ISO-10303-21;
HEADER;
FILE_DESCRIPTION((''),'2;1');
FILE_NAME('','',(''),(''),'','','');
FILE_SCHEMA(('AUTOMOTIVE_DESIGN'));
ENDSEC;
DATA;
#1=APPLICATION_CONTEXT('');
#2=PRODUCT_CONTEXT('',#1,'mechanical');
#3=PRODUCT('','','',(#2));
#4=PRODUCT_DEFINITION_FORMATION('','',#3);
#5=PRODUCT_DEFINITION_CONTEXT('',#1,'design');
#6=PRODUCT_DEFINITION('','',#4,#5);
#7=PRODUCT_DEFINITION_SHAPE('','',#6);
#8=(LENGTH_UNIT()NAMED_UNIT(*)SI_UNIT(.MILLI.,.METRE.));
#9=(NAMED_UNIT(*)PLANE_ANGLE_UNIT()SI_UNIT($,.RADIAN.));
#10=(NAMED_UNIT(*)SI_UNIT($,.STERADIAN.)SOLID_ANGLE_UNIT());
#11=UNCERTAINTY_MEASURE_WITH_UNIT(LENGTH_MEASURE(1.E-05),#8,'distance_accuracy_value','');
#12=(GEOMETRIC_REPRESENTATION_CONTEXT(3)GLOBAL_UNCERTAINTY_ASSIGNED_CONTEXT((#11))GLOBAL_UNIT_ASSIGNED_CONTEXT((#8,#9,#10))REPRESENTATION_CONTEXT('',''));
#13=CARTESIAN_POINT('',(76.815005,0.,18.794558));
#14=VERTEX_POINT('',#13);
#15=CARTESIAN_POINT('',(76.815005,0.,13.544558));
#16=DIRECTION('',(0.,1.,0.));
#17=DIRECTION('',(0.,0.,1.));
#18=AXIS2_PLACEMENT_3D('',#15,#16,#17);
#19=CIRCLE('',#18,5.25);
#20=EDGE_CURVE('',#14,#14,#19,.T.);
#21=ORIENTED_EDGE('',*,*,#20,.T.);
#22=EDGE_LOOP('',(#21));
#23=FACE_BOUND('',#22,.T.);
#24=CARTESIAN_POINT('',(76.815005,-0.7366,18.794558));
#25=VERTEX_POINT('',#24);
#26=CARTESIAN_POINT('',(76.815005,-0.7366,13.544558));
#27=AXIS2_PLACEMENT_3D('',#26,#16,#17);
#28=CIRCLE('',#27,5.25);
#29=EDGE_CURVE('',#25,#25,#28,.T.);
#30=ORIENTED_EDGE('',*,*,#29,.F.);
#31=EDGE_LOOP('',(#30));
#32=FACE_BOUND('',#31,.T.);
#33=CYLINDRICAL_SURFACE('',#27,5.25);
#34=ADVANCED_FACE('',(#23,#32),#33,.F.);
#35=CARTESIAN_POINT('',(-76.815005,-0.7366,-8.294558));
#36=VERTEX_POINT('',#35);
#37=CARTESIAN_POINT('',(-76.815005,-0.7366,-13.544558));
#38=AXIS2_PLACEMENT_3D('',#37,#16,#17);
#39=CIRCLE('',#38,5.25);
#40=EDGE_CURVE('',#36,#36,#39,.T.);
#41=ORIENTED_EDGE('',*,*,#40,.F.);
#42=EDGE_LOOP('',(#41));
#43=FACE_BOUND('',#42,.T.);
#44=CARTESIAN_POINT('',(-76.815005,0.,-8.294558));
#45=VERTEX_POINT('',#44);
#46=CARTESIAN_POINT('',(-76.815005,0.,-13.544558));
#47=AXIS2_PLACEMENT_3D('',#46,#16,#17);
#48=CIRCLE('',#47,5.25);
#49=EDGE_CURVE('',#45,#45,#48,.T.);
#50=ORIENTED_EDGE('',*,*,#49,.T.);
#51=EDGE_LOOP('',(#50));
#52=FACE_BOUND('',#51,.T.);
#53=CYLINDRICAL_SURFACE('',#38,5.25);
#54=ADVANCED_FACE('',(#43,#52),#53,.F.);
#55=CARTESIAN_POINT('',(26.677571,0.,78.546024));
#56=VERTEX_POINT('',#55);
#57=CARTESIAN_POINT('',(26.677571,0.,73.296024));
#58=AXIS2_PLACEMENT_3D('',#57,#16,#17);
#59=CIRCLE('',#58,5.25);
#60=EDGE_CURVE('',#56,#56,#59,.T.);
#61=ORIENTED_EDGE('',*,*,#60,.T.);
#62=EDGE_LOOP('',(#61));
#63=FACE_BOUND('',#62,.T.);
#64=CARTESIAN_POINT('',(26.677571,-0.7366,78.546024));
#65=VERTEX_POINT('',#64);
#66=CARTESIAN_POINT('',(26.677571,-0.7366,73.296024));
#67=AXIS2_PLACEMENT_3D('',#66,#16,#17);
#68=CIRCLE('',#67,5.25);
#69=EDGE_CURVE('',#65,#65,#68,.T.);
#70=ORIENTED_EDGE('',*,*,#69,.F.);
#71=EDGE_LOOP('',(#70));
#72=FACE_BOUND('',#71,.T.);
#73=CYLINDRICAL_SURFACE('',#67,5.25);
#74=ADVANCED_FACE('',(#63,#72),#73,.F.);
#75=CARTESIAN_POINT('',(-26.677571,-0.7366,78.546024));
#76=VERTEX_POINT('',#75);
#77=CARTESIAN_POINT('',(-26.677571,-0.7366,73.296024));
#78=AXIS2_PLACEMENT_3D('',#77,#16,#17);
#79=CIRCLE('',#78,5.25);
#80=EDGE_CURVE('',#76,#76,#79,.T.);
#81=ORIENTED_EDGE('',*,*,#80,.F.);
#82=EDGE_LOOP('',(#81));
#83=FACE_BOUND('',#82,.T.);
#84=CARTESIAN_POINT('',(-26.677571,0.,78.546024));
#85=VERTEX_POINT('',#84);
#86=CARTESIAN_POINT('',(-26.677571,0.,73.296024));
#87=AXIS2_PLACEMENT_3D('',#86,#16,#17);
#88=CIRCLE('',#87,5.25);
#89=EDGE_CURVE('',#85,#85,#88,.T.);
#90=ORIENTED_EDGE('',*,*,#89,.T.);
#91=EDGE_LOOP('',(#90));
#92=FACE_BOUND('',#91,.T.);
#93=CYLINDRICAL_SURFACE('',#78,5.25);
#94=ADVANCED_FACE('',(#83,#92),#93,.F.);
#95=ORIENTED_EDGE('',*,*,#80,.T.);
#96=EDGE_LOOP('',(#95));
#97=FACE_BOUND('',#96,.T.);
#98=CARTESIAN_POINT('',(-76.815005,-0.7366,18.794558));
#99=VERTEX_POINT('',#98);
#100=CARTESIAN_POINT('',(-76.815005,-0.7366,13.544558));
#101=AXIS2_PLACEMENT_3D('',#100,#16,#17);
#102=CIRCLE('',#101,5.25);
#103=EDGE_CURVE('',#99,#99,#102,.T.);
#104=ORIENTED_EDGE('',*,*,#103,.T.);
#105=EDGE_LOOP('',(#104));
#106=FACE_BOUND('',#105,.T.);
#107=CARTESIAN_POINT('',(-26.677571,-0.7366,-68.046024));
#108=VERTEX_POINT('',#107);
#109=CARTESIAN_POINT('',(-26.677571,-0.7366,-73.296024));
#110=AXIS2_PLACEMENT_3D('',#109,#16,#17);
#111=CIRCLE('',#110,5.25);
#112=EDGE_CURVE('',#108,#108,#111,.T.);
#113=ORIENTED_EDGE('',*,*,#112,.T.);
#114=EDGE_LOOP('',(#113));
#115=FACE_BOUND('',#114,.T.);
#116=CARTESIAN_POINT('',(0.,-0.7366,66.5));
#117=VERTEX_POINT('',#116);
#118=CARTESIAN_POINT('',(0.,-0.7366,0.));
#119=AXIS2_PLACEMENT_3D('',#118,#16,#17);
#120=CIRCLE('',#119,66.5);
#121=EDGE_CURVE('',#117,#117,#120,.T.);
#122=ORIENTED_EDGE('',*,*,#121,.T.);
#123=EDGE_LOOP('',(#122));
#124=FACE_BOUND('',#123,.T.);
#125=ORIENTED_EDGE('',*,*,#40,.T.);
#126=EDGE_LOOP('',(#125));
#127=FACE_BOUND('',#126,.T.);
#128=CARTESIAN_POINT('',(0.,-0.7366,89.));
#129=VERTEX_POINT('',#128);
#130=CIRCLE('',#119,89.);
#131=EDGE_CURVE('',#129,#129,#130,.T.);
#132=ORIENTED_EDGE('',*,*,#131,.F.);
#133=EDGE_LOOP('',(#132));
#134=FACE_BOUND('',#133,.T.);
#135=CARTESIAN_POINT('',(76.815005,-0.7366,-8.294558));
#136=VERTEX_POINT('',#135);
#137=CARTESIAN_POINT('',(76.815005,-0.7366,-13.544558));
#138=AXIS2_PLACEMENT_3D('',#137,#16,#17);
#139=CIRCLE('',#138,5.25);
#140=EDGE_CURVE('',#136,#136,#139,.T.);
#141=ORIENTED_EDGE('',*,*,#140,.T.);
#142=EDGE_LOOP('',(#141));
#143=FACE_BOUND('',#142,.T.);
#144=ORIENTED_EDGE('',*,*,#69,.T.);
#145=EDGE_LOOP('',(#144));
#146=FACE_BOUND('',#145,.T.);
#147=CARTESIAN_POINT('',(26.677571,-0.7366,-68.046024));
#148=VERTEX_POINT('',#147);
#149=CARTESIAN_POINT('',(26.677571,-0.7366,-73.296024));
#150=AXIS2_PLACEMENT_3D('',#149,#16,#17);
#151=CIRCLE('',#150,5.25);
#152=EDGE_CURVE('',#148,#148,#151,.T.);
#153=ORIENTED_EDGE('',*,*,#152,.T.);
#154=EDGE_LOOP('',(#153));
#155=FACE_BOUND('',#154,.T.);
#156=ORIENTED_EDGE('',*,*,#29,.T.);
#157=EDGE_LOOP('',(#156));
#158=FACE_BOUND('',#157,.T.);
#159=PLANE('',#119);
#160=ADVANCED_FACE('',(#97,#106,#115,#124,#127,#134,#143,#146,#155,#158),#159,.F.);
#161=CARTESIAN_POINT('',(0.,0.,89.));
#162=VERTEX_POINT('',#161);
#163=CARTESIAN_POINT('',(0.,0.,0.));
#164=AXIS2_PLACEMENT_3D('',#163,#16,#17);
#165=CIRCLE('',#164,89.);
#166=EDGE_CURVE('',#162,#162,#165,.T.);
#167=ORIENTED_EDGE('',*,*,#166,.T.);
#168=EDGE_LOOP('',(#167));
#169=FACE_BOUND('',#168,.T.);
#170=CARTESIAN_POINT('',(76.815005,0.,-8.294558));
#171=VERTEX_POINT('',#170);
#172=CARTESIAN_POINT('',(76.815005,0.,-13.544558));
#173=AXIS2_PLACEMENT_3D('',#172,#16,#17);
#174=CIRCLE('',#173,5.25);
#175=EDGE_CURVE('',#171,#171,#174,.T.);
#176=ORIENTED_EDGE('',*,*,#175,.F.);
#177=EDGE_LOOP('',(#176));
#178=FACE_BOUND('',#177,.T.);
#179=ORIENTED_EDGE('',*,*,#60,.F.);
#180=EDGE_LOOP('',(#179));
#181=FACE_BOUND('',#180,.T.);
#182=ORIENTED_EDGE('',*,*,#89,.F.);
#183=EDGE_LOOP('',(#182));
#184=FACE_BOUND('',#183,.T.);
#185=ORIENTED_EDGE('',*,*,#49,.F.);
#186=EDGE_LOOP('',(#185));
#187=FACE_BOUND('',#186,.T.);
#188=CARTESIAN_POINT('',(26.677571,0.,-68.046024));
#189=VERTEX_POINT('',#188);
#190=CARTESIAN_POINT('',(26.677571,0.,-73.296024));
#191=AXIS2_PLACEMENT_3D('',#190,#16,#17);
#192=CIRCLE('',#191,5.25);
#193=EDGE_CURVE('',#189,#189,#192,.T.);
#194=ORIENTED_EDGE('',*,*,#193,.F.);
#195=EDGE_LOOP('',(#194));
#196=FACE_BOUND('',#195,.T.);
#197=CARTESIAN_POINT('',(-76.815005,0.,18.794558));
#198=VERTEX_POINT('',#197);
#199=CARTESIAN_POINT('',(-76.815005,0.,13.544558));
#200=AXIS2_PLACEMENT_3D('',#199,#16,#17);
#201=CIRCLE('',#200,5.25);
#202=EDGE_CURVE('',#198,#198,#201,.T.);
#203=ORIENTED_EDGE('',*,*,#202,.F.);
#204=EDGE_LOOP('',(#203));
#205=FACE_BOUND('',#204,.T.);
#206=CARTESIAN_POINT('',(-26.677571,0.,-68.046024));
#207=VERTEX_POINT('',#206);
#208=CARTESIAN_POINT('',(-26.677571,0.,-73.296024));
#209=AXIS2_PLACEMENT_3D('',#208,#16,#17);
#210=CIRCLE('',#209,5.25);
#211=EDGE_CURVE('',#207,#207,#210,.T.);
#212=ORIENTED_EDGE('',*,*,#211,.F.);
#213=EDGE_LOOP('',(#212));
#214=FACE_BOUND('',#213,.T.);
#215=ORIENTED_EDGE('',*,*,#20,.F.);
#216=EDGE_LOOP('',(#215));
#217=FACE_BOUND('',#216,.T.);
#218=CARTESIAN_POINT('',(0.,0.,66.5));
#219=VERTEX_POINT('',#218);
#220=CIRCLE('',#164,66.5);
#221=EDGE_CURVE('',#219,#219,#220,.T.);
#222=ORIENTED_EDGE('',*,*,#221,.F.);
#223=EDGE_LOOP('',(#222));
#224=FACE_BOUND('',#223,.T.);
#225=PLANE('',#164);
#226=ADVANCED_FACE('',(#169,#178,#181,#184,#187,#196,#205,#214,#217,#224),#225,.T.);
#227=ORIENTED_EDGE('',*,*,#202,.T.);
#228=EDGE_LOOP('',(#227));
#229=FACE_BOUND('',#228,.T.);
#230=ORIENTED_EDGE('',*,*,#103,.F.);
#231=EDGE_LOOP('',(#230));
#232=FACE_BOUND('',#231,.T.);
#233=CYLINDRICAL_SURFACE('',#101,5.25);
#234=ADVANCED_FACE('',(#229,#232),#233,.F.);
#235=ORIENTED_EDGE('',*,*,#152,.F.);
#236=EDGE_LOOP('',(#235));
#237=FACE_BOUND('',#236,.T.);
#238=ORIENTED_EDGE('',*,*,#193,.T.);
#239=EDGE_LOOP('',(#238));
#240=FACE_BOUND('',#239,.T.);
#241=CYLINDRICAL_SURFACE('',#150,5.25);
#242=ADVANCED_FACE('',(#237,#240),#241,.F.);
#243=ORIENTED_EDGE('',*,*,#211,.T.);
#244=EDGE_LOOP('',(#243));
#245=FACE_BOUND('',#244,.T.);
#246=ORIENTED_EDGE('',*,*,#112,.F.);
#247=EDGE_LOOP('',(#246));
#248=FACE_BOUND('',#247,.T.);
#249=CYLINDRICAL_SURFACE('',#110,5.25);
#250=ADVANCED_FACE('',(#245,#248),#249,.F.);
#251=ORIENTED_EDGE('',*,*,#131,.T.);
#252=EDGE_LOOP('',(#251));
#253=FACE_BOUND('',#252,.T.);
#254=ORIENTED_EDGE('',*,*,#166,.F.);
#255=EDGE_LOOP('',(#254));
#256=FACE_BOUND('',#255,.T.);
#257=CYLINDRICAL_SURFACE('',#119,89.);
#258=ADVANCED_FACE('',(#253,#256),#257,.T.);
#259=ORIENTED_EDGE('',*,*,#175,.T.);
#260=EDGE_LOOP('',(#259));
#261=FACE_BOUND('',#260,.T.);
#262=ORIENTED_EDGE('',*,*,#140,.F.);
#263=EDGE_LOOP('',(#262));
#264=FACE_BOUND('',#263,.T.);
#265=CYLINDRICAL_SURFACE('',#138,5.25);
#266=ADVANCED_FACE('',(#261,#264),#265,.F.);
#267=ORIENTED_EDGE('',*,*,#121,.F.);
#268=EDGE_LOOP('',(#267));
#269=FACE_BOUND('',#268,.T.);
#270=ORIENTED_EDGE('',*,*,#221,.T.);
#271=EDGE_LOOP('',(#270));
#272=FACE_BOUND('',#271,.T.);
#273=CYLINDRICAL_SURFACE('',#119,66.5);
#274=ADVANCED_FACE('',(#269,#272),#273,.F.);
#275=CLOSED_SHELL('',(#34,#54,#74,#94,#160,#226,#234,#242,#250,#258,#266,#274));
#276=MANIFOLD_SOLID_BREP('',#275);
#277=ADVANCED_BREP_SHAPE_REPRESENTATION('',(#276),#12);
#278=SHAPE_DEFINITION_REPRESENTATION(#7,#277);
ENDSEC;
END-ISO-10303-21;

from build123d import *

# Parameters (mm, degrees)
SKETCH1_R          = 89
SKETCH1_R_2        = 66.5
SKETCH1_R_3        = 5.25
BASE_FLANGE1_DEPTH = 0.7366


# Sheet-metal steps are written as plain solids
with BuildPart() as part:
    # Sketch1 → Base-Flange1 (new body)
    with BuildSketch(Plane(origin=(0, 0, 0), x_dir=(1, 0, 0), z_dir=(0, 1, 0))):
        with Locations(Location((0, 0, 0), (0, 0, 270))):
            Circle(SKETCH1_R)
        with Locations(Location((0, 0, 0), (0, 0, 270))):
            Circle(SKETCH1_R_2, mode=Mode.SUBTRACT)
        with Locations(Location((26.677571179, 73.296024421, 0), (0, 0, 270))):
            Circle(SKETCH1_R_3, mode=Mode.SUBTRACT)
        with Locations(Location((-26.677571179, 73.296024421, 0), (0, 0, 270))):
            Circle(SKETCH1_R_3, mode=Mode.SUBTRACT)
        with Locations(Location((-76.815004735, 13.544557858, 0), (0, 0, 270))):
            Circle(SKETCH1_R_3, mode=Mode.SUBTRACT)
        with Locations(Location((-76.815004735, -13.544557858, 0), (0, 0, 270))):
            Circle(SKETCH1_R_3, mode=Mode.SUBTRACT)
        with Locations(Location((-26.677571179, -73.296024421, 0), (0, 0, 270))):
            Circle(SKETCH1_R_3, mode=Mode.SUBTRACT)
        with Locations(Location((26.677571179, -73.296024421, 0), (0, 0, 270))):
            Circle(SKETCH1_R_3, mode=Mode.SUBTRACT)
        with Locations(Location((76.815004735, 13.544557858, 0), (0, 0, 270))):
            Circle(SKETCH1_R_3, mode=Mode.SUBTRACT)
        with Locations(Location((76.815004735, -13.544557858, 0), (0, 0, 270))):
            Circle(SKETCH1_R_3, mode=Mode.SUBTRACT)
    extrude(amount=-BASE_FLANGE1_DEPTH)


solid = part.part
